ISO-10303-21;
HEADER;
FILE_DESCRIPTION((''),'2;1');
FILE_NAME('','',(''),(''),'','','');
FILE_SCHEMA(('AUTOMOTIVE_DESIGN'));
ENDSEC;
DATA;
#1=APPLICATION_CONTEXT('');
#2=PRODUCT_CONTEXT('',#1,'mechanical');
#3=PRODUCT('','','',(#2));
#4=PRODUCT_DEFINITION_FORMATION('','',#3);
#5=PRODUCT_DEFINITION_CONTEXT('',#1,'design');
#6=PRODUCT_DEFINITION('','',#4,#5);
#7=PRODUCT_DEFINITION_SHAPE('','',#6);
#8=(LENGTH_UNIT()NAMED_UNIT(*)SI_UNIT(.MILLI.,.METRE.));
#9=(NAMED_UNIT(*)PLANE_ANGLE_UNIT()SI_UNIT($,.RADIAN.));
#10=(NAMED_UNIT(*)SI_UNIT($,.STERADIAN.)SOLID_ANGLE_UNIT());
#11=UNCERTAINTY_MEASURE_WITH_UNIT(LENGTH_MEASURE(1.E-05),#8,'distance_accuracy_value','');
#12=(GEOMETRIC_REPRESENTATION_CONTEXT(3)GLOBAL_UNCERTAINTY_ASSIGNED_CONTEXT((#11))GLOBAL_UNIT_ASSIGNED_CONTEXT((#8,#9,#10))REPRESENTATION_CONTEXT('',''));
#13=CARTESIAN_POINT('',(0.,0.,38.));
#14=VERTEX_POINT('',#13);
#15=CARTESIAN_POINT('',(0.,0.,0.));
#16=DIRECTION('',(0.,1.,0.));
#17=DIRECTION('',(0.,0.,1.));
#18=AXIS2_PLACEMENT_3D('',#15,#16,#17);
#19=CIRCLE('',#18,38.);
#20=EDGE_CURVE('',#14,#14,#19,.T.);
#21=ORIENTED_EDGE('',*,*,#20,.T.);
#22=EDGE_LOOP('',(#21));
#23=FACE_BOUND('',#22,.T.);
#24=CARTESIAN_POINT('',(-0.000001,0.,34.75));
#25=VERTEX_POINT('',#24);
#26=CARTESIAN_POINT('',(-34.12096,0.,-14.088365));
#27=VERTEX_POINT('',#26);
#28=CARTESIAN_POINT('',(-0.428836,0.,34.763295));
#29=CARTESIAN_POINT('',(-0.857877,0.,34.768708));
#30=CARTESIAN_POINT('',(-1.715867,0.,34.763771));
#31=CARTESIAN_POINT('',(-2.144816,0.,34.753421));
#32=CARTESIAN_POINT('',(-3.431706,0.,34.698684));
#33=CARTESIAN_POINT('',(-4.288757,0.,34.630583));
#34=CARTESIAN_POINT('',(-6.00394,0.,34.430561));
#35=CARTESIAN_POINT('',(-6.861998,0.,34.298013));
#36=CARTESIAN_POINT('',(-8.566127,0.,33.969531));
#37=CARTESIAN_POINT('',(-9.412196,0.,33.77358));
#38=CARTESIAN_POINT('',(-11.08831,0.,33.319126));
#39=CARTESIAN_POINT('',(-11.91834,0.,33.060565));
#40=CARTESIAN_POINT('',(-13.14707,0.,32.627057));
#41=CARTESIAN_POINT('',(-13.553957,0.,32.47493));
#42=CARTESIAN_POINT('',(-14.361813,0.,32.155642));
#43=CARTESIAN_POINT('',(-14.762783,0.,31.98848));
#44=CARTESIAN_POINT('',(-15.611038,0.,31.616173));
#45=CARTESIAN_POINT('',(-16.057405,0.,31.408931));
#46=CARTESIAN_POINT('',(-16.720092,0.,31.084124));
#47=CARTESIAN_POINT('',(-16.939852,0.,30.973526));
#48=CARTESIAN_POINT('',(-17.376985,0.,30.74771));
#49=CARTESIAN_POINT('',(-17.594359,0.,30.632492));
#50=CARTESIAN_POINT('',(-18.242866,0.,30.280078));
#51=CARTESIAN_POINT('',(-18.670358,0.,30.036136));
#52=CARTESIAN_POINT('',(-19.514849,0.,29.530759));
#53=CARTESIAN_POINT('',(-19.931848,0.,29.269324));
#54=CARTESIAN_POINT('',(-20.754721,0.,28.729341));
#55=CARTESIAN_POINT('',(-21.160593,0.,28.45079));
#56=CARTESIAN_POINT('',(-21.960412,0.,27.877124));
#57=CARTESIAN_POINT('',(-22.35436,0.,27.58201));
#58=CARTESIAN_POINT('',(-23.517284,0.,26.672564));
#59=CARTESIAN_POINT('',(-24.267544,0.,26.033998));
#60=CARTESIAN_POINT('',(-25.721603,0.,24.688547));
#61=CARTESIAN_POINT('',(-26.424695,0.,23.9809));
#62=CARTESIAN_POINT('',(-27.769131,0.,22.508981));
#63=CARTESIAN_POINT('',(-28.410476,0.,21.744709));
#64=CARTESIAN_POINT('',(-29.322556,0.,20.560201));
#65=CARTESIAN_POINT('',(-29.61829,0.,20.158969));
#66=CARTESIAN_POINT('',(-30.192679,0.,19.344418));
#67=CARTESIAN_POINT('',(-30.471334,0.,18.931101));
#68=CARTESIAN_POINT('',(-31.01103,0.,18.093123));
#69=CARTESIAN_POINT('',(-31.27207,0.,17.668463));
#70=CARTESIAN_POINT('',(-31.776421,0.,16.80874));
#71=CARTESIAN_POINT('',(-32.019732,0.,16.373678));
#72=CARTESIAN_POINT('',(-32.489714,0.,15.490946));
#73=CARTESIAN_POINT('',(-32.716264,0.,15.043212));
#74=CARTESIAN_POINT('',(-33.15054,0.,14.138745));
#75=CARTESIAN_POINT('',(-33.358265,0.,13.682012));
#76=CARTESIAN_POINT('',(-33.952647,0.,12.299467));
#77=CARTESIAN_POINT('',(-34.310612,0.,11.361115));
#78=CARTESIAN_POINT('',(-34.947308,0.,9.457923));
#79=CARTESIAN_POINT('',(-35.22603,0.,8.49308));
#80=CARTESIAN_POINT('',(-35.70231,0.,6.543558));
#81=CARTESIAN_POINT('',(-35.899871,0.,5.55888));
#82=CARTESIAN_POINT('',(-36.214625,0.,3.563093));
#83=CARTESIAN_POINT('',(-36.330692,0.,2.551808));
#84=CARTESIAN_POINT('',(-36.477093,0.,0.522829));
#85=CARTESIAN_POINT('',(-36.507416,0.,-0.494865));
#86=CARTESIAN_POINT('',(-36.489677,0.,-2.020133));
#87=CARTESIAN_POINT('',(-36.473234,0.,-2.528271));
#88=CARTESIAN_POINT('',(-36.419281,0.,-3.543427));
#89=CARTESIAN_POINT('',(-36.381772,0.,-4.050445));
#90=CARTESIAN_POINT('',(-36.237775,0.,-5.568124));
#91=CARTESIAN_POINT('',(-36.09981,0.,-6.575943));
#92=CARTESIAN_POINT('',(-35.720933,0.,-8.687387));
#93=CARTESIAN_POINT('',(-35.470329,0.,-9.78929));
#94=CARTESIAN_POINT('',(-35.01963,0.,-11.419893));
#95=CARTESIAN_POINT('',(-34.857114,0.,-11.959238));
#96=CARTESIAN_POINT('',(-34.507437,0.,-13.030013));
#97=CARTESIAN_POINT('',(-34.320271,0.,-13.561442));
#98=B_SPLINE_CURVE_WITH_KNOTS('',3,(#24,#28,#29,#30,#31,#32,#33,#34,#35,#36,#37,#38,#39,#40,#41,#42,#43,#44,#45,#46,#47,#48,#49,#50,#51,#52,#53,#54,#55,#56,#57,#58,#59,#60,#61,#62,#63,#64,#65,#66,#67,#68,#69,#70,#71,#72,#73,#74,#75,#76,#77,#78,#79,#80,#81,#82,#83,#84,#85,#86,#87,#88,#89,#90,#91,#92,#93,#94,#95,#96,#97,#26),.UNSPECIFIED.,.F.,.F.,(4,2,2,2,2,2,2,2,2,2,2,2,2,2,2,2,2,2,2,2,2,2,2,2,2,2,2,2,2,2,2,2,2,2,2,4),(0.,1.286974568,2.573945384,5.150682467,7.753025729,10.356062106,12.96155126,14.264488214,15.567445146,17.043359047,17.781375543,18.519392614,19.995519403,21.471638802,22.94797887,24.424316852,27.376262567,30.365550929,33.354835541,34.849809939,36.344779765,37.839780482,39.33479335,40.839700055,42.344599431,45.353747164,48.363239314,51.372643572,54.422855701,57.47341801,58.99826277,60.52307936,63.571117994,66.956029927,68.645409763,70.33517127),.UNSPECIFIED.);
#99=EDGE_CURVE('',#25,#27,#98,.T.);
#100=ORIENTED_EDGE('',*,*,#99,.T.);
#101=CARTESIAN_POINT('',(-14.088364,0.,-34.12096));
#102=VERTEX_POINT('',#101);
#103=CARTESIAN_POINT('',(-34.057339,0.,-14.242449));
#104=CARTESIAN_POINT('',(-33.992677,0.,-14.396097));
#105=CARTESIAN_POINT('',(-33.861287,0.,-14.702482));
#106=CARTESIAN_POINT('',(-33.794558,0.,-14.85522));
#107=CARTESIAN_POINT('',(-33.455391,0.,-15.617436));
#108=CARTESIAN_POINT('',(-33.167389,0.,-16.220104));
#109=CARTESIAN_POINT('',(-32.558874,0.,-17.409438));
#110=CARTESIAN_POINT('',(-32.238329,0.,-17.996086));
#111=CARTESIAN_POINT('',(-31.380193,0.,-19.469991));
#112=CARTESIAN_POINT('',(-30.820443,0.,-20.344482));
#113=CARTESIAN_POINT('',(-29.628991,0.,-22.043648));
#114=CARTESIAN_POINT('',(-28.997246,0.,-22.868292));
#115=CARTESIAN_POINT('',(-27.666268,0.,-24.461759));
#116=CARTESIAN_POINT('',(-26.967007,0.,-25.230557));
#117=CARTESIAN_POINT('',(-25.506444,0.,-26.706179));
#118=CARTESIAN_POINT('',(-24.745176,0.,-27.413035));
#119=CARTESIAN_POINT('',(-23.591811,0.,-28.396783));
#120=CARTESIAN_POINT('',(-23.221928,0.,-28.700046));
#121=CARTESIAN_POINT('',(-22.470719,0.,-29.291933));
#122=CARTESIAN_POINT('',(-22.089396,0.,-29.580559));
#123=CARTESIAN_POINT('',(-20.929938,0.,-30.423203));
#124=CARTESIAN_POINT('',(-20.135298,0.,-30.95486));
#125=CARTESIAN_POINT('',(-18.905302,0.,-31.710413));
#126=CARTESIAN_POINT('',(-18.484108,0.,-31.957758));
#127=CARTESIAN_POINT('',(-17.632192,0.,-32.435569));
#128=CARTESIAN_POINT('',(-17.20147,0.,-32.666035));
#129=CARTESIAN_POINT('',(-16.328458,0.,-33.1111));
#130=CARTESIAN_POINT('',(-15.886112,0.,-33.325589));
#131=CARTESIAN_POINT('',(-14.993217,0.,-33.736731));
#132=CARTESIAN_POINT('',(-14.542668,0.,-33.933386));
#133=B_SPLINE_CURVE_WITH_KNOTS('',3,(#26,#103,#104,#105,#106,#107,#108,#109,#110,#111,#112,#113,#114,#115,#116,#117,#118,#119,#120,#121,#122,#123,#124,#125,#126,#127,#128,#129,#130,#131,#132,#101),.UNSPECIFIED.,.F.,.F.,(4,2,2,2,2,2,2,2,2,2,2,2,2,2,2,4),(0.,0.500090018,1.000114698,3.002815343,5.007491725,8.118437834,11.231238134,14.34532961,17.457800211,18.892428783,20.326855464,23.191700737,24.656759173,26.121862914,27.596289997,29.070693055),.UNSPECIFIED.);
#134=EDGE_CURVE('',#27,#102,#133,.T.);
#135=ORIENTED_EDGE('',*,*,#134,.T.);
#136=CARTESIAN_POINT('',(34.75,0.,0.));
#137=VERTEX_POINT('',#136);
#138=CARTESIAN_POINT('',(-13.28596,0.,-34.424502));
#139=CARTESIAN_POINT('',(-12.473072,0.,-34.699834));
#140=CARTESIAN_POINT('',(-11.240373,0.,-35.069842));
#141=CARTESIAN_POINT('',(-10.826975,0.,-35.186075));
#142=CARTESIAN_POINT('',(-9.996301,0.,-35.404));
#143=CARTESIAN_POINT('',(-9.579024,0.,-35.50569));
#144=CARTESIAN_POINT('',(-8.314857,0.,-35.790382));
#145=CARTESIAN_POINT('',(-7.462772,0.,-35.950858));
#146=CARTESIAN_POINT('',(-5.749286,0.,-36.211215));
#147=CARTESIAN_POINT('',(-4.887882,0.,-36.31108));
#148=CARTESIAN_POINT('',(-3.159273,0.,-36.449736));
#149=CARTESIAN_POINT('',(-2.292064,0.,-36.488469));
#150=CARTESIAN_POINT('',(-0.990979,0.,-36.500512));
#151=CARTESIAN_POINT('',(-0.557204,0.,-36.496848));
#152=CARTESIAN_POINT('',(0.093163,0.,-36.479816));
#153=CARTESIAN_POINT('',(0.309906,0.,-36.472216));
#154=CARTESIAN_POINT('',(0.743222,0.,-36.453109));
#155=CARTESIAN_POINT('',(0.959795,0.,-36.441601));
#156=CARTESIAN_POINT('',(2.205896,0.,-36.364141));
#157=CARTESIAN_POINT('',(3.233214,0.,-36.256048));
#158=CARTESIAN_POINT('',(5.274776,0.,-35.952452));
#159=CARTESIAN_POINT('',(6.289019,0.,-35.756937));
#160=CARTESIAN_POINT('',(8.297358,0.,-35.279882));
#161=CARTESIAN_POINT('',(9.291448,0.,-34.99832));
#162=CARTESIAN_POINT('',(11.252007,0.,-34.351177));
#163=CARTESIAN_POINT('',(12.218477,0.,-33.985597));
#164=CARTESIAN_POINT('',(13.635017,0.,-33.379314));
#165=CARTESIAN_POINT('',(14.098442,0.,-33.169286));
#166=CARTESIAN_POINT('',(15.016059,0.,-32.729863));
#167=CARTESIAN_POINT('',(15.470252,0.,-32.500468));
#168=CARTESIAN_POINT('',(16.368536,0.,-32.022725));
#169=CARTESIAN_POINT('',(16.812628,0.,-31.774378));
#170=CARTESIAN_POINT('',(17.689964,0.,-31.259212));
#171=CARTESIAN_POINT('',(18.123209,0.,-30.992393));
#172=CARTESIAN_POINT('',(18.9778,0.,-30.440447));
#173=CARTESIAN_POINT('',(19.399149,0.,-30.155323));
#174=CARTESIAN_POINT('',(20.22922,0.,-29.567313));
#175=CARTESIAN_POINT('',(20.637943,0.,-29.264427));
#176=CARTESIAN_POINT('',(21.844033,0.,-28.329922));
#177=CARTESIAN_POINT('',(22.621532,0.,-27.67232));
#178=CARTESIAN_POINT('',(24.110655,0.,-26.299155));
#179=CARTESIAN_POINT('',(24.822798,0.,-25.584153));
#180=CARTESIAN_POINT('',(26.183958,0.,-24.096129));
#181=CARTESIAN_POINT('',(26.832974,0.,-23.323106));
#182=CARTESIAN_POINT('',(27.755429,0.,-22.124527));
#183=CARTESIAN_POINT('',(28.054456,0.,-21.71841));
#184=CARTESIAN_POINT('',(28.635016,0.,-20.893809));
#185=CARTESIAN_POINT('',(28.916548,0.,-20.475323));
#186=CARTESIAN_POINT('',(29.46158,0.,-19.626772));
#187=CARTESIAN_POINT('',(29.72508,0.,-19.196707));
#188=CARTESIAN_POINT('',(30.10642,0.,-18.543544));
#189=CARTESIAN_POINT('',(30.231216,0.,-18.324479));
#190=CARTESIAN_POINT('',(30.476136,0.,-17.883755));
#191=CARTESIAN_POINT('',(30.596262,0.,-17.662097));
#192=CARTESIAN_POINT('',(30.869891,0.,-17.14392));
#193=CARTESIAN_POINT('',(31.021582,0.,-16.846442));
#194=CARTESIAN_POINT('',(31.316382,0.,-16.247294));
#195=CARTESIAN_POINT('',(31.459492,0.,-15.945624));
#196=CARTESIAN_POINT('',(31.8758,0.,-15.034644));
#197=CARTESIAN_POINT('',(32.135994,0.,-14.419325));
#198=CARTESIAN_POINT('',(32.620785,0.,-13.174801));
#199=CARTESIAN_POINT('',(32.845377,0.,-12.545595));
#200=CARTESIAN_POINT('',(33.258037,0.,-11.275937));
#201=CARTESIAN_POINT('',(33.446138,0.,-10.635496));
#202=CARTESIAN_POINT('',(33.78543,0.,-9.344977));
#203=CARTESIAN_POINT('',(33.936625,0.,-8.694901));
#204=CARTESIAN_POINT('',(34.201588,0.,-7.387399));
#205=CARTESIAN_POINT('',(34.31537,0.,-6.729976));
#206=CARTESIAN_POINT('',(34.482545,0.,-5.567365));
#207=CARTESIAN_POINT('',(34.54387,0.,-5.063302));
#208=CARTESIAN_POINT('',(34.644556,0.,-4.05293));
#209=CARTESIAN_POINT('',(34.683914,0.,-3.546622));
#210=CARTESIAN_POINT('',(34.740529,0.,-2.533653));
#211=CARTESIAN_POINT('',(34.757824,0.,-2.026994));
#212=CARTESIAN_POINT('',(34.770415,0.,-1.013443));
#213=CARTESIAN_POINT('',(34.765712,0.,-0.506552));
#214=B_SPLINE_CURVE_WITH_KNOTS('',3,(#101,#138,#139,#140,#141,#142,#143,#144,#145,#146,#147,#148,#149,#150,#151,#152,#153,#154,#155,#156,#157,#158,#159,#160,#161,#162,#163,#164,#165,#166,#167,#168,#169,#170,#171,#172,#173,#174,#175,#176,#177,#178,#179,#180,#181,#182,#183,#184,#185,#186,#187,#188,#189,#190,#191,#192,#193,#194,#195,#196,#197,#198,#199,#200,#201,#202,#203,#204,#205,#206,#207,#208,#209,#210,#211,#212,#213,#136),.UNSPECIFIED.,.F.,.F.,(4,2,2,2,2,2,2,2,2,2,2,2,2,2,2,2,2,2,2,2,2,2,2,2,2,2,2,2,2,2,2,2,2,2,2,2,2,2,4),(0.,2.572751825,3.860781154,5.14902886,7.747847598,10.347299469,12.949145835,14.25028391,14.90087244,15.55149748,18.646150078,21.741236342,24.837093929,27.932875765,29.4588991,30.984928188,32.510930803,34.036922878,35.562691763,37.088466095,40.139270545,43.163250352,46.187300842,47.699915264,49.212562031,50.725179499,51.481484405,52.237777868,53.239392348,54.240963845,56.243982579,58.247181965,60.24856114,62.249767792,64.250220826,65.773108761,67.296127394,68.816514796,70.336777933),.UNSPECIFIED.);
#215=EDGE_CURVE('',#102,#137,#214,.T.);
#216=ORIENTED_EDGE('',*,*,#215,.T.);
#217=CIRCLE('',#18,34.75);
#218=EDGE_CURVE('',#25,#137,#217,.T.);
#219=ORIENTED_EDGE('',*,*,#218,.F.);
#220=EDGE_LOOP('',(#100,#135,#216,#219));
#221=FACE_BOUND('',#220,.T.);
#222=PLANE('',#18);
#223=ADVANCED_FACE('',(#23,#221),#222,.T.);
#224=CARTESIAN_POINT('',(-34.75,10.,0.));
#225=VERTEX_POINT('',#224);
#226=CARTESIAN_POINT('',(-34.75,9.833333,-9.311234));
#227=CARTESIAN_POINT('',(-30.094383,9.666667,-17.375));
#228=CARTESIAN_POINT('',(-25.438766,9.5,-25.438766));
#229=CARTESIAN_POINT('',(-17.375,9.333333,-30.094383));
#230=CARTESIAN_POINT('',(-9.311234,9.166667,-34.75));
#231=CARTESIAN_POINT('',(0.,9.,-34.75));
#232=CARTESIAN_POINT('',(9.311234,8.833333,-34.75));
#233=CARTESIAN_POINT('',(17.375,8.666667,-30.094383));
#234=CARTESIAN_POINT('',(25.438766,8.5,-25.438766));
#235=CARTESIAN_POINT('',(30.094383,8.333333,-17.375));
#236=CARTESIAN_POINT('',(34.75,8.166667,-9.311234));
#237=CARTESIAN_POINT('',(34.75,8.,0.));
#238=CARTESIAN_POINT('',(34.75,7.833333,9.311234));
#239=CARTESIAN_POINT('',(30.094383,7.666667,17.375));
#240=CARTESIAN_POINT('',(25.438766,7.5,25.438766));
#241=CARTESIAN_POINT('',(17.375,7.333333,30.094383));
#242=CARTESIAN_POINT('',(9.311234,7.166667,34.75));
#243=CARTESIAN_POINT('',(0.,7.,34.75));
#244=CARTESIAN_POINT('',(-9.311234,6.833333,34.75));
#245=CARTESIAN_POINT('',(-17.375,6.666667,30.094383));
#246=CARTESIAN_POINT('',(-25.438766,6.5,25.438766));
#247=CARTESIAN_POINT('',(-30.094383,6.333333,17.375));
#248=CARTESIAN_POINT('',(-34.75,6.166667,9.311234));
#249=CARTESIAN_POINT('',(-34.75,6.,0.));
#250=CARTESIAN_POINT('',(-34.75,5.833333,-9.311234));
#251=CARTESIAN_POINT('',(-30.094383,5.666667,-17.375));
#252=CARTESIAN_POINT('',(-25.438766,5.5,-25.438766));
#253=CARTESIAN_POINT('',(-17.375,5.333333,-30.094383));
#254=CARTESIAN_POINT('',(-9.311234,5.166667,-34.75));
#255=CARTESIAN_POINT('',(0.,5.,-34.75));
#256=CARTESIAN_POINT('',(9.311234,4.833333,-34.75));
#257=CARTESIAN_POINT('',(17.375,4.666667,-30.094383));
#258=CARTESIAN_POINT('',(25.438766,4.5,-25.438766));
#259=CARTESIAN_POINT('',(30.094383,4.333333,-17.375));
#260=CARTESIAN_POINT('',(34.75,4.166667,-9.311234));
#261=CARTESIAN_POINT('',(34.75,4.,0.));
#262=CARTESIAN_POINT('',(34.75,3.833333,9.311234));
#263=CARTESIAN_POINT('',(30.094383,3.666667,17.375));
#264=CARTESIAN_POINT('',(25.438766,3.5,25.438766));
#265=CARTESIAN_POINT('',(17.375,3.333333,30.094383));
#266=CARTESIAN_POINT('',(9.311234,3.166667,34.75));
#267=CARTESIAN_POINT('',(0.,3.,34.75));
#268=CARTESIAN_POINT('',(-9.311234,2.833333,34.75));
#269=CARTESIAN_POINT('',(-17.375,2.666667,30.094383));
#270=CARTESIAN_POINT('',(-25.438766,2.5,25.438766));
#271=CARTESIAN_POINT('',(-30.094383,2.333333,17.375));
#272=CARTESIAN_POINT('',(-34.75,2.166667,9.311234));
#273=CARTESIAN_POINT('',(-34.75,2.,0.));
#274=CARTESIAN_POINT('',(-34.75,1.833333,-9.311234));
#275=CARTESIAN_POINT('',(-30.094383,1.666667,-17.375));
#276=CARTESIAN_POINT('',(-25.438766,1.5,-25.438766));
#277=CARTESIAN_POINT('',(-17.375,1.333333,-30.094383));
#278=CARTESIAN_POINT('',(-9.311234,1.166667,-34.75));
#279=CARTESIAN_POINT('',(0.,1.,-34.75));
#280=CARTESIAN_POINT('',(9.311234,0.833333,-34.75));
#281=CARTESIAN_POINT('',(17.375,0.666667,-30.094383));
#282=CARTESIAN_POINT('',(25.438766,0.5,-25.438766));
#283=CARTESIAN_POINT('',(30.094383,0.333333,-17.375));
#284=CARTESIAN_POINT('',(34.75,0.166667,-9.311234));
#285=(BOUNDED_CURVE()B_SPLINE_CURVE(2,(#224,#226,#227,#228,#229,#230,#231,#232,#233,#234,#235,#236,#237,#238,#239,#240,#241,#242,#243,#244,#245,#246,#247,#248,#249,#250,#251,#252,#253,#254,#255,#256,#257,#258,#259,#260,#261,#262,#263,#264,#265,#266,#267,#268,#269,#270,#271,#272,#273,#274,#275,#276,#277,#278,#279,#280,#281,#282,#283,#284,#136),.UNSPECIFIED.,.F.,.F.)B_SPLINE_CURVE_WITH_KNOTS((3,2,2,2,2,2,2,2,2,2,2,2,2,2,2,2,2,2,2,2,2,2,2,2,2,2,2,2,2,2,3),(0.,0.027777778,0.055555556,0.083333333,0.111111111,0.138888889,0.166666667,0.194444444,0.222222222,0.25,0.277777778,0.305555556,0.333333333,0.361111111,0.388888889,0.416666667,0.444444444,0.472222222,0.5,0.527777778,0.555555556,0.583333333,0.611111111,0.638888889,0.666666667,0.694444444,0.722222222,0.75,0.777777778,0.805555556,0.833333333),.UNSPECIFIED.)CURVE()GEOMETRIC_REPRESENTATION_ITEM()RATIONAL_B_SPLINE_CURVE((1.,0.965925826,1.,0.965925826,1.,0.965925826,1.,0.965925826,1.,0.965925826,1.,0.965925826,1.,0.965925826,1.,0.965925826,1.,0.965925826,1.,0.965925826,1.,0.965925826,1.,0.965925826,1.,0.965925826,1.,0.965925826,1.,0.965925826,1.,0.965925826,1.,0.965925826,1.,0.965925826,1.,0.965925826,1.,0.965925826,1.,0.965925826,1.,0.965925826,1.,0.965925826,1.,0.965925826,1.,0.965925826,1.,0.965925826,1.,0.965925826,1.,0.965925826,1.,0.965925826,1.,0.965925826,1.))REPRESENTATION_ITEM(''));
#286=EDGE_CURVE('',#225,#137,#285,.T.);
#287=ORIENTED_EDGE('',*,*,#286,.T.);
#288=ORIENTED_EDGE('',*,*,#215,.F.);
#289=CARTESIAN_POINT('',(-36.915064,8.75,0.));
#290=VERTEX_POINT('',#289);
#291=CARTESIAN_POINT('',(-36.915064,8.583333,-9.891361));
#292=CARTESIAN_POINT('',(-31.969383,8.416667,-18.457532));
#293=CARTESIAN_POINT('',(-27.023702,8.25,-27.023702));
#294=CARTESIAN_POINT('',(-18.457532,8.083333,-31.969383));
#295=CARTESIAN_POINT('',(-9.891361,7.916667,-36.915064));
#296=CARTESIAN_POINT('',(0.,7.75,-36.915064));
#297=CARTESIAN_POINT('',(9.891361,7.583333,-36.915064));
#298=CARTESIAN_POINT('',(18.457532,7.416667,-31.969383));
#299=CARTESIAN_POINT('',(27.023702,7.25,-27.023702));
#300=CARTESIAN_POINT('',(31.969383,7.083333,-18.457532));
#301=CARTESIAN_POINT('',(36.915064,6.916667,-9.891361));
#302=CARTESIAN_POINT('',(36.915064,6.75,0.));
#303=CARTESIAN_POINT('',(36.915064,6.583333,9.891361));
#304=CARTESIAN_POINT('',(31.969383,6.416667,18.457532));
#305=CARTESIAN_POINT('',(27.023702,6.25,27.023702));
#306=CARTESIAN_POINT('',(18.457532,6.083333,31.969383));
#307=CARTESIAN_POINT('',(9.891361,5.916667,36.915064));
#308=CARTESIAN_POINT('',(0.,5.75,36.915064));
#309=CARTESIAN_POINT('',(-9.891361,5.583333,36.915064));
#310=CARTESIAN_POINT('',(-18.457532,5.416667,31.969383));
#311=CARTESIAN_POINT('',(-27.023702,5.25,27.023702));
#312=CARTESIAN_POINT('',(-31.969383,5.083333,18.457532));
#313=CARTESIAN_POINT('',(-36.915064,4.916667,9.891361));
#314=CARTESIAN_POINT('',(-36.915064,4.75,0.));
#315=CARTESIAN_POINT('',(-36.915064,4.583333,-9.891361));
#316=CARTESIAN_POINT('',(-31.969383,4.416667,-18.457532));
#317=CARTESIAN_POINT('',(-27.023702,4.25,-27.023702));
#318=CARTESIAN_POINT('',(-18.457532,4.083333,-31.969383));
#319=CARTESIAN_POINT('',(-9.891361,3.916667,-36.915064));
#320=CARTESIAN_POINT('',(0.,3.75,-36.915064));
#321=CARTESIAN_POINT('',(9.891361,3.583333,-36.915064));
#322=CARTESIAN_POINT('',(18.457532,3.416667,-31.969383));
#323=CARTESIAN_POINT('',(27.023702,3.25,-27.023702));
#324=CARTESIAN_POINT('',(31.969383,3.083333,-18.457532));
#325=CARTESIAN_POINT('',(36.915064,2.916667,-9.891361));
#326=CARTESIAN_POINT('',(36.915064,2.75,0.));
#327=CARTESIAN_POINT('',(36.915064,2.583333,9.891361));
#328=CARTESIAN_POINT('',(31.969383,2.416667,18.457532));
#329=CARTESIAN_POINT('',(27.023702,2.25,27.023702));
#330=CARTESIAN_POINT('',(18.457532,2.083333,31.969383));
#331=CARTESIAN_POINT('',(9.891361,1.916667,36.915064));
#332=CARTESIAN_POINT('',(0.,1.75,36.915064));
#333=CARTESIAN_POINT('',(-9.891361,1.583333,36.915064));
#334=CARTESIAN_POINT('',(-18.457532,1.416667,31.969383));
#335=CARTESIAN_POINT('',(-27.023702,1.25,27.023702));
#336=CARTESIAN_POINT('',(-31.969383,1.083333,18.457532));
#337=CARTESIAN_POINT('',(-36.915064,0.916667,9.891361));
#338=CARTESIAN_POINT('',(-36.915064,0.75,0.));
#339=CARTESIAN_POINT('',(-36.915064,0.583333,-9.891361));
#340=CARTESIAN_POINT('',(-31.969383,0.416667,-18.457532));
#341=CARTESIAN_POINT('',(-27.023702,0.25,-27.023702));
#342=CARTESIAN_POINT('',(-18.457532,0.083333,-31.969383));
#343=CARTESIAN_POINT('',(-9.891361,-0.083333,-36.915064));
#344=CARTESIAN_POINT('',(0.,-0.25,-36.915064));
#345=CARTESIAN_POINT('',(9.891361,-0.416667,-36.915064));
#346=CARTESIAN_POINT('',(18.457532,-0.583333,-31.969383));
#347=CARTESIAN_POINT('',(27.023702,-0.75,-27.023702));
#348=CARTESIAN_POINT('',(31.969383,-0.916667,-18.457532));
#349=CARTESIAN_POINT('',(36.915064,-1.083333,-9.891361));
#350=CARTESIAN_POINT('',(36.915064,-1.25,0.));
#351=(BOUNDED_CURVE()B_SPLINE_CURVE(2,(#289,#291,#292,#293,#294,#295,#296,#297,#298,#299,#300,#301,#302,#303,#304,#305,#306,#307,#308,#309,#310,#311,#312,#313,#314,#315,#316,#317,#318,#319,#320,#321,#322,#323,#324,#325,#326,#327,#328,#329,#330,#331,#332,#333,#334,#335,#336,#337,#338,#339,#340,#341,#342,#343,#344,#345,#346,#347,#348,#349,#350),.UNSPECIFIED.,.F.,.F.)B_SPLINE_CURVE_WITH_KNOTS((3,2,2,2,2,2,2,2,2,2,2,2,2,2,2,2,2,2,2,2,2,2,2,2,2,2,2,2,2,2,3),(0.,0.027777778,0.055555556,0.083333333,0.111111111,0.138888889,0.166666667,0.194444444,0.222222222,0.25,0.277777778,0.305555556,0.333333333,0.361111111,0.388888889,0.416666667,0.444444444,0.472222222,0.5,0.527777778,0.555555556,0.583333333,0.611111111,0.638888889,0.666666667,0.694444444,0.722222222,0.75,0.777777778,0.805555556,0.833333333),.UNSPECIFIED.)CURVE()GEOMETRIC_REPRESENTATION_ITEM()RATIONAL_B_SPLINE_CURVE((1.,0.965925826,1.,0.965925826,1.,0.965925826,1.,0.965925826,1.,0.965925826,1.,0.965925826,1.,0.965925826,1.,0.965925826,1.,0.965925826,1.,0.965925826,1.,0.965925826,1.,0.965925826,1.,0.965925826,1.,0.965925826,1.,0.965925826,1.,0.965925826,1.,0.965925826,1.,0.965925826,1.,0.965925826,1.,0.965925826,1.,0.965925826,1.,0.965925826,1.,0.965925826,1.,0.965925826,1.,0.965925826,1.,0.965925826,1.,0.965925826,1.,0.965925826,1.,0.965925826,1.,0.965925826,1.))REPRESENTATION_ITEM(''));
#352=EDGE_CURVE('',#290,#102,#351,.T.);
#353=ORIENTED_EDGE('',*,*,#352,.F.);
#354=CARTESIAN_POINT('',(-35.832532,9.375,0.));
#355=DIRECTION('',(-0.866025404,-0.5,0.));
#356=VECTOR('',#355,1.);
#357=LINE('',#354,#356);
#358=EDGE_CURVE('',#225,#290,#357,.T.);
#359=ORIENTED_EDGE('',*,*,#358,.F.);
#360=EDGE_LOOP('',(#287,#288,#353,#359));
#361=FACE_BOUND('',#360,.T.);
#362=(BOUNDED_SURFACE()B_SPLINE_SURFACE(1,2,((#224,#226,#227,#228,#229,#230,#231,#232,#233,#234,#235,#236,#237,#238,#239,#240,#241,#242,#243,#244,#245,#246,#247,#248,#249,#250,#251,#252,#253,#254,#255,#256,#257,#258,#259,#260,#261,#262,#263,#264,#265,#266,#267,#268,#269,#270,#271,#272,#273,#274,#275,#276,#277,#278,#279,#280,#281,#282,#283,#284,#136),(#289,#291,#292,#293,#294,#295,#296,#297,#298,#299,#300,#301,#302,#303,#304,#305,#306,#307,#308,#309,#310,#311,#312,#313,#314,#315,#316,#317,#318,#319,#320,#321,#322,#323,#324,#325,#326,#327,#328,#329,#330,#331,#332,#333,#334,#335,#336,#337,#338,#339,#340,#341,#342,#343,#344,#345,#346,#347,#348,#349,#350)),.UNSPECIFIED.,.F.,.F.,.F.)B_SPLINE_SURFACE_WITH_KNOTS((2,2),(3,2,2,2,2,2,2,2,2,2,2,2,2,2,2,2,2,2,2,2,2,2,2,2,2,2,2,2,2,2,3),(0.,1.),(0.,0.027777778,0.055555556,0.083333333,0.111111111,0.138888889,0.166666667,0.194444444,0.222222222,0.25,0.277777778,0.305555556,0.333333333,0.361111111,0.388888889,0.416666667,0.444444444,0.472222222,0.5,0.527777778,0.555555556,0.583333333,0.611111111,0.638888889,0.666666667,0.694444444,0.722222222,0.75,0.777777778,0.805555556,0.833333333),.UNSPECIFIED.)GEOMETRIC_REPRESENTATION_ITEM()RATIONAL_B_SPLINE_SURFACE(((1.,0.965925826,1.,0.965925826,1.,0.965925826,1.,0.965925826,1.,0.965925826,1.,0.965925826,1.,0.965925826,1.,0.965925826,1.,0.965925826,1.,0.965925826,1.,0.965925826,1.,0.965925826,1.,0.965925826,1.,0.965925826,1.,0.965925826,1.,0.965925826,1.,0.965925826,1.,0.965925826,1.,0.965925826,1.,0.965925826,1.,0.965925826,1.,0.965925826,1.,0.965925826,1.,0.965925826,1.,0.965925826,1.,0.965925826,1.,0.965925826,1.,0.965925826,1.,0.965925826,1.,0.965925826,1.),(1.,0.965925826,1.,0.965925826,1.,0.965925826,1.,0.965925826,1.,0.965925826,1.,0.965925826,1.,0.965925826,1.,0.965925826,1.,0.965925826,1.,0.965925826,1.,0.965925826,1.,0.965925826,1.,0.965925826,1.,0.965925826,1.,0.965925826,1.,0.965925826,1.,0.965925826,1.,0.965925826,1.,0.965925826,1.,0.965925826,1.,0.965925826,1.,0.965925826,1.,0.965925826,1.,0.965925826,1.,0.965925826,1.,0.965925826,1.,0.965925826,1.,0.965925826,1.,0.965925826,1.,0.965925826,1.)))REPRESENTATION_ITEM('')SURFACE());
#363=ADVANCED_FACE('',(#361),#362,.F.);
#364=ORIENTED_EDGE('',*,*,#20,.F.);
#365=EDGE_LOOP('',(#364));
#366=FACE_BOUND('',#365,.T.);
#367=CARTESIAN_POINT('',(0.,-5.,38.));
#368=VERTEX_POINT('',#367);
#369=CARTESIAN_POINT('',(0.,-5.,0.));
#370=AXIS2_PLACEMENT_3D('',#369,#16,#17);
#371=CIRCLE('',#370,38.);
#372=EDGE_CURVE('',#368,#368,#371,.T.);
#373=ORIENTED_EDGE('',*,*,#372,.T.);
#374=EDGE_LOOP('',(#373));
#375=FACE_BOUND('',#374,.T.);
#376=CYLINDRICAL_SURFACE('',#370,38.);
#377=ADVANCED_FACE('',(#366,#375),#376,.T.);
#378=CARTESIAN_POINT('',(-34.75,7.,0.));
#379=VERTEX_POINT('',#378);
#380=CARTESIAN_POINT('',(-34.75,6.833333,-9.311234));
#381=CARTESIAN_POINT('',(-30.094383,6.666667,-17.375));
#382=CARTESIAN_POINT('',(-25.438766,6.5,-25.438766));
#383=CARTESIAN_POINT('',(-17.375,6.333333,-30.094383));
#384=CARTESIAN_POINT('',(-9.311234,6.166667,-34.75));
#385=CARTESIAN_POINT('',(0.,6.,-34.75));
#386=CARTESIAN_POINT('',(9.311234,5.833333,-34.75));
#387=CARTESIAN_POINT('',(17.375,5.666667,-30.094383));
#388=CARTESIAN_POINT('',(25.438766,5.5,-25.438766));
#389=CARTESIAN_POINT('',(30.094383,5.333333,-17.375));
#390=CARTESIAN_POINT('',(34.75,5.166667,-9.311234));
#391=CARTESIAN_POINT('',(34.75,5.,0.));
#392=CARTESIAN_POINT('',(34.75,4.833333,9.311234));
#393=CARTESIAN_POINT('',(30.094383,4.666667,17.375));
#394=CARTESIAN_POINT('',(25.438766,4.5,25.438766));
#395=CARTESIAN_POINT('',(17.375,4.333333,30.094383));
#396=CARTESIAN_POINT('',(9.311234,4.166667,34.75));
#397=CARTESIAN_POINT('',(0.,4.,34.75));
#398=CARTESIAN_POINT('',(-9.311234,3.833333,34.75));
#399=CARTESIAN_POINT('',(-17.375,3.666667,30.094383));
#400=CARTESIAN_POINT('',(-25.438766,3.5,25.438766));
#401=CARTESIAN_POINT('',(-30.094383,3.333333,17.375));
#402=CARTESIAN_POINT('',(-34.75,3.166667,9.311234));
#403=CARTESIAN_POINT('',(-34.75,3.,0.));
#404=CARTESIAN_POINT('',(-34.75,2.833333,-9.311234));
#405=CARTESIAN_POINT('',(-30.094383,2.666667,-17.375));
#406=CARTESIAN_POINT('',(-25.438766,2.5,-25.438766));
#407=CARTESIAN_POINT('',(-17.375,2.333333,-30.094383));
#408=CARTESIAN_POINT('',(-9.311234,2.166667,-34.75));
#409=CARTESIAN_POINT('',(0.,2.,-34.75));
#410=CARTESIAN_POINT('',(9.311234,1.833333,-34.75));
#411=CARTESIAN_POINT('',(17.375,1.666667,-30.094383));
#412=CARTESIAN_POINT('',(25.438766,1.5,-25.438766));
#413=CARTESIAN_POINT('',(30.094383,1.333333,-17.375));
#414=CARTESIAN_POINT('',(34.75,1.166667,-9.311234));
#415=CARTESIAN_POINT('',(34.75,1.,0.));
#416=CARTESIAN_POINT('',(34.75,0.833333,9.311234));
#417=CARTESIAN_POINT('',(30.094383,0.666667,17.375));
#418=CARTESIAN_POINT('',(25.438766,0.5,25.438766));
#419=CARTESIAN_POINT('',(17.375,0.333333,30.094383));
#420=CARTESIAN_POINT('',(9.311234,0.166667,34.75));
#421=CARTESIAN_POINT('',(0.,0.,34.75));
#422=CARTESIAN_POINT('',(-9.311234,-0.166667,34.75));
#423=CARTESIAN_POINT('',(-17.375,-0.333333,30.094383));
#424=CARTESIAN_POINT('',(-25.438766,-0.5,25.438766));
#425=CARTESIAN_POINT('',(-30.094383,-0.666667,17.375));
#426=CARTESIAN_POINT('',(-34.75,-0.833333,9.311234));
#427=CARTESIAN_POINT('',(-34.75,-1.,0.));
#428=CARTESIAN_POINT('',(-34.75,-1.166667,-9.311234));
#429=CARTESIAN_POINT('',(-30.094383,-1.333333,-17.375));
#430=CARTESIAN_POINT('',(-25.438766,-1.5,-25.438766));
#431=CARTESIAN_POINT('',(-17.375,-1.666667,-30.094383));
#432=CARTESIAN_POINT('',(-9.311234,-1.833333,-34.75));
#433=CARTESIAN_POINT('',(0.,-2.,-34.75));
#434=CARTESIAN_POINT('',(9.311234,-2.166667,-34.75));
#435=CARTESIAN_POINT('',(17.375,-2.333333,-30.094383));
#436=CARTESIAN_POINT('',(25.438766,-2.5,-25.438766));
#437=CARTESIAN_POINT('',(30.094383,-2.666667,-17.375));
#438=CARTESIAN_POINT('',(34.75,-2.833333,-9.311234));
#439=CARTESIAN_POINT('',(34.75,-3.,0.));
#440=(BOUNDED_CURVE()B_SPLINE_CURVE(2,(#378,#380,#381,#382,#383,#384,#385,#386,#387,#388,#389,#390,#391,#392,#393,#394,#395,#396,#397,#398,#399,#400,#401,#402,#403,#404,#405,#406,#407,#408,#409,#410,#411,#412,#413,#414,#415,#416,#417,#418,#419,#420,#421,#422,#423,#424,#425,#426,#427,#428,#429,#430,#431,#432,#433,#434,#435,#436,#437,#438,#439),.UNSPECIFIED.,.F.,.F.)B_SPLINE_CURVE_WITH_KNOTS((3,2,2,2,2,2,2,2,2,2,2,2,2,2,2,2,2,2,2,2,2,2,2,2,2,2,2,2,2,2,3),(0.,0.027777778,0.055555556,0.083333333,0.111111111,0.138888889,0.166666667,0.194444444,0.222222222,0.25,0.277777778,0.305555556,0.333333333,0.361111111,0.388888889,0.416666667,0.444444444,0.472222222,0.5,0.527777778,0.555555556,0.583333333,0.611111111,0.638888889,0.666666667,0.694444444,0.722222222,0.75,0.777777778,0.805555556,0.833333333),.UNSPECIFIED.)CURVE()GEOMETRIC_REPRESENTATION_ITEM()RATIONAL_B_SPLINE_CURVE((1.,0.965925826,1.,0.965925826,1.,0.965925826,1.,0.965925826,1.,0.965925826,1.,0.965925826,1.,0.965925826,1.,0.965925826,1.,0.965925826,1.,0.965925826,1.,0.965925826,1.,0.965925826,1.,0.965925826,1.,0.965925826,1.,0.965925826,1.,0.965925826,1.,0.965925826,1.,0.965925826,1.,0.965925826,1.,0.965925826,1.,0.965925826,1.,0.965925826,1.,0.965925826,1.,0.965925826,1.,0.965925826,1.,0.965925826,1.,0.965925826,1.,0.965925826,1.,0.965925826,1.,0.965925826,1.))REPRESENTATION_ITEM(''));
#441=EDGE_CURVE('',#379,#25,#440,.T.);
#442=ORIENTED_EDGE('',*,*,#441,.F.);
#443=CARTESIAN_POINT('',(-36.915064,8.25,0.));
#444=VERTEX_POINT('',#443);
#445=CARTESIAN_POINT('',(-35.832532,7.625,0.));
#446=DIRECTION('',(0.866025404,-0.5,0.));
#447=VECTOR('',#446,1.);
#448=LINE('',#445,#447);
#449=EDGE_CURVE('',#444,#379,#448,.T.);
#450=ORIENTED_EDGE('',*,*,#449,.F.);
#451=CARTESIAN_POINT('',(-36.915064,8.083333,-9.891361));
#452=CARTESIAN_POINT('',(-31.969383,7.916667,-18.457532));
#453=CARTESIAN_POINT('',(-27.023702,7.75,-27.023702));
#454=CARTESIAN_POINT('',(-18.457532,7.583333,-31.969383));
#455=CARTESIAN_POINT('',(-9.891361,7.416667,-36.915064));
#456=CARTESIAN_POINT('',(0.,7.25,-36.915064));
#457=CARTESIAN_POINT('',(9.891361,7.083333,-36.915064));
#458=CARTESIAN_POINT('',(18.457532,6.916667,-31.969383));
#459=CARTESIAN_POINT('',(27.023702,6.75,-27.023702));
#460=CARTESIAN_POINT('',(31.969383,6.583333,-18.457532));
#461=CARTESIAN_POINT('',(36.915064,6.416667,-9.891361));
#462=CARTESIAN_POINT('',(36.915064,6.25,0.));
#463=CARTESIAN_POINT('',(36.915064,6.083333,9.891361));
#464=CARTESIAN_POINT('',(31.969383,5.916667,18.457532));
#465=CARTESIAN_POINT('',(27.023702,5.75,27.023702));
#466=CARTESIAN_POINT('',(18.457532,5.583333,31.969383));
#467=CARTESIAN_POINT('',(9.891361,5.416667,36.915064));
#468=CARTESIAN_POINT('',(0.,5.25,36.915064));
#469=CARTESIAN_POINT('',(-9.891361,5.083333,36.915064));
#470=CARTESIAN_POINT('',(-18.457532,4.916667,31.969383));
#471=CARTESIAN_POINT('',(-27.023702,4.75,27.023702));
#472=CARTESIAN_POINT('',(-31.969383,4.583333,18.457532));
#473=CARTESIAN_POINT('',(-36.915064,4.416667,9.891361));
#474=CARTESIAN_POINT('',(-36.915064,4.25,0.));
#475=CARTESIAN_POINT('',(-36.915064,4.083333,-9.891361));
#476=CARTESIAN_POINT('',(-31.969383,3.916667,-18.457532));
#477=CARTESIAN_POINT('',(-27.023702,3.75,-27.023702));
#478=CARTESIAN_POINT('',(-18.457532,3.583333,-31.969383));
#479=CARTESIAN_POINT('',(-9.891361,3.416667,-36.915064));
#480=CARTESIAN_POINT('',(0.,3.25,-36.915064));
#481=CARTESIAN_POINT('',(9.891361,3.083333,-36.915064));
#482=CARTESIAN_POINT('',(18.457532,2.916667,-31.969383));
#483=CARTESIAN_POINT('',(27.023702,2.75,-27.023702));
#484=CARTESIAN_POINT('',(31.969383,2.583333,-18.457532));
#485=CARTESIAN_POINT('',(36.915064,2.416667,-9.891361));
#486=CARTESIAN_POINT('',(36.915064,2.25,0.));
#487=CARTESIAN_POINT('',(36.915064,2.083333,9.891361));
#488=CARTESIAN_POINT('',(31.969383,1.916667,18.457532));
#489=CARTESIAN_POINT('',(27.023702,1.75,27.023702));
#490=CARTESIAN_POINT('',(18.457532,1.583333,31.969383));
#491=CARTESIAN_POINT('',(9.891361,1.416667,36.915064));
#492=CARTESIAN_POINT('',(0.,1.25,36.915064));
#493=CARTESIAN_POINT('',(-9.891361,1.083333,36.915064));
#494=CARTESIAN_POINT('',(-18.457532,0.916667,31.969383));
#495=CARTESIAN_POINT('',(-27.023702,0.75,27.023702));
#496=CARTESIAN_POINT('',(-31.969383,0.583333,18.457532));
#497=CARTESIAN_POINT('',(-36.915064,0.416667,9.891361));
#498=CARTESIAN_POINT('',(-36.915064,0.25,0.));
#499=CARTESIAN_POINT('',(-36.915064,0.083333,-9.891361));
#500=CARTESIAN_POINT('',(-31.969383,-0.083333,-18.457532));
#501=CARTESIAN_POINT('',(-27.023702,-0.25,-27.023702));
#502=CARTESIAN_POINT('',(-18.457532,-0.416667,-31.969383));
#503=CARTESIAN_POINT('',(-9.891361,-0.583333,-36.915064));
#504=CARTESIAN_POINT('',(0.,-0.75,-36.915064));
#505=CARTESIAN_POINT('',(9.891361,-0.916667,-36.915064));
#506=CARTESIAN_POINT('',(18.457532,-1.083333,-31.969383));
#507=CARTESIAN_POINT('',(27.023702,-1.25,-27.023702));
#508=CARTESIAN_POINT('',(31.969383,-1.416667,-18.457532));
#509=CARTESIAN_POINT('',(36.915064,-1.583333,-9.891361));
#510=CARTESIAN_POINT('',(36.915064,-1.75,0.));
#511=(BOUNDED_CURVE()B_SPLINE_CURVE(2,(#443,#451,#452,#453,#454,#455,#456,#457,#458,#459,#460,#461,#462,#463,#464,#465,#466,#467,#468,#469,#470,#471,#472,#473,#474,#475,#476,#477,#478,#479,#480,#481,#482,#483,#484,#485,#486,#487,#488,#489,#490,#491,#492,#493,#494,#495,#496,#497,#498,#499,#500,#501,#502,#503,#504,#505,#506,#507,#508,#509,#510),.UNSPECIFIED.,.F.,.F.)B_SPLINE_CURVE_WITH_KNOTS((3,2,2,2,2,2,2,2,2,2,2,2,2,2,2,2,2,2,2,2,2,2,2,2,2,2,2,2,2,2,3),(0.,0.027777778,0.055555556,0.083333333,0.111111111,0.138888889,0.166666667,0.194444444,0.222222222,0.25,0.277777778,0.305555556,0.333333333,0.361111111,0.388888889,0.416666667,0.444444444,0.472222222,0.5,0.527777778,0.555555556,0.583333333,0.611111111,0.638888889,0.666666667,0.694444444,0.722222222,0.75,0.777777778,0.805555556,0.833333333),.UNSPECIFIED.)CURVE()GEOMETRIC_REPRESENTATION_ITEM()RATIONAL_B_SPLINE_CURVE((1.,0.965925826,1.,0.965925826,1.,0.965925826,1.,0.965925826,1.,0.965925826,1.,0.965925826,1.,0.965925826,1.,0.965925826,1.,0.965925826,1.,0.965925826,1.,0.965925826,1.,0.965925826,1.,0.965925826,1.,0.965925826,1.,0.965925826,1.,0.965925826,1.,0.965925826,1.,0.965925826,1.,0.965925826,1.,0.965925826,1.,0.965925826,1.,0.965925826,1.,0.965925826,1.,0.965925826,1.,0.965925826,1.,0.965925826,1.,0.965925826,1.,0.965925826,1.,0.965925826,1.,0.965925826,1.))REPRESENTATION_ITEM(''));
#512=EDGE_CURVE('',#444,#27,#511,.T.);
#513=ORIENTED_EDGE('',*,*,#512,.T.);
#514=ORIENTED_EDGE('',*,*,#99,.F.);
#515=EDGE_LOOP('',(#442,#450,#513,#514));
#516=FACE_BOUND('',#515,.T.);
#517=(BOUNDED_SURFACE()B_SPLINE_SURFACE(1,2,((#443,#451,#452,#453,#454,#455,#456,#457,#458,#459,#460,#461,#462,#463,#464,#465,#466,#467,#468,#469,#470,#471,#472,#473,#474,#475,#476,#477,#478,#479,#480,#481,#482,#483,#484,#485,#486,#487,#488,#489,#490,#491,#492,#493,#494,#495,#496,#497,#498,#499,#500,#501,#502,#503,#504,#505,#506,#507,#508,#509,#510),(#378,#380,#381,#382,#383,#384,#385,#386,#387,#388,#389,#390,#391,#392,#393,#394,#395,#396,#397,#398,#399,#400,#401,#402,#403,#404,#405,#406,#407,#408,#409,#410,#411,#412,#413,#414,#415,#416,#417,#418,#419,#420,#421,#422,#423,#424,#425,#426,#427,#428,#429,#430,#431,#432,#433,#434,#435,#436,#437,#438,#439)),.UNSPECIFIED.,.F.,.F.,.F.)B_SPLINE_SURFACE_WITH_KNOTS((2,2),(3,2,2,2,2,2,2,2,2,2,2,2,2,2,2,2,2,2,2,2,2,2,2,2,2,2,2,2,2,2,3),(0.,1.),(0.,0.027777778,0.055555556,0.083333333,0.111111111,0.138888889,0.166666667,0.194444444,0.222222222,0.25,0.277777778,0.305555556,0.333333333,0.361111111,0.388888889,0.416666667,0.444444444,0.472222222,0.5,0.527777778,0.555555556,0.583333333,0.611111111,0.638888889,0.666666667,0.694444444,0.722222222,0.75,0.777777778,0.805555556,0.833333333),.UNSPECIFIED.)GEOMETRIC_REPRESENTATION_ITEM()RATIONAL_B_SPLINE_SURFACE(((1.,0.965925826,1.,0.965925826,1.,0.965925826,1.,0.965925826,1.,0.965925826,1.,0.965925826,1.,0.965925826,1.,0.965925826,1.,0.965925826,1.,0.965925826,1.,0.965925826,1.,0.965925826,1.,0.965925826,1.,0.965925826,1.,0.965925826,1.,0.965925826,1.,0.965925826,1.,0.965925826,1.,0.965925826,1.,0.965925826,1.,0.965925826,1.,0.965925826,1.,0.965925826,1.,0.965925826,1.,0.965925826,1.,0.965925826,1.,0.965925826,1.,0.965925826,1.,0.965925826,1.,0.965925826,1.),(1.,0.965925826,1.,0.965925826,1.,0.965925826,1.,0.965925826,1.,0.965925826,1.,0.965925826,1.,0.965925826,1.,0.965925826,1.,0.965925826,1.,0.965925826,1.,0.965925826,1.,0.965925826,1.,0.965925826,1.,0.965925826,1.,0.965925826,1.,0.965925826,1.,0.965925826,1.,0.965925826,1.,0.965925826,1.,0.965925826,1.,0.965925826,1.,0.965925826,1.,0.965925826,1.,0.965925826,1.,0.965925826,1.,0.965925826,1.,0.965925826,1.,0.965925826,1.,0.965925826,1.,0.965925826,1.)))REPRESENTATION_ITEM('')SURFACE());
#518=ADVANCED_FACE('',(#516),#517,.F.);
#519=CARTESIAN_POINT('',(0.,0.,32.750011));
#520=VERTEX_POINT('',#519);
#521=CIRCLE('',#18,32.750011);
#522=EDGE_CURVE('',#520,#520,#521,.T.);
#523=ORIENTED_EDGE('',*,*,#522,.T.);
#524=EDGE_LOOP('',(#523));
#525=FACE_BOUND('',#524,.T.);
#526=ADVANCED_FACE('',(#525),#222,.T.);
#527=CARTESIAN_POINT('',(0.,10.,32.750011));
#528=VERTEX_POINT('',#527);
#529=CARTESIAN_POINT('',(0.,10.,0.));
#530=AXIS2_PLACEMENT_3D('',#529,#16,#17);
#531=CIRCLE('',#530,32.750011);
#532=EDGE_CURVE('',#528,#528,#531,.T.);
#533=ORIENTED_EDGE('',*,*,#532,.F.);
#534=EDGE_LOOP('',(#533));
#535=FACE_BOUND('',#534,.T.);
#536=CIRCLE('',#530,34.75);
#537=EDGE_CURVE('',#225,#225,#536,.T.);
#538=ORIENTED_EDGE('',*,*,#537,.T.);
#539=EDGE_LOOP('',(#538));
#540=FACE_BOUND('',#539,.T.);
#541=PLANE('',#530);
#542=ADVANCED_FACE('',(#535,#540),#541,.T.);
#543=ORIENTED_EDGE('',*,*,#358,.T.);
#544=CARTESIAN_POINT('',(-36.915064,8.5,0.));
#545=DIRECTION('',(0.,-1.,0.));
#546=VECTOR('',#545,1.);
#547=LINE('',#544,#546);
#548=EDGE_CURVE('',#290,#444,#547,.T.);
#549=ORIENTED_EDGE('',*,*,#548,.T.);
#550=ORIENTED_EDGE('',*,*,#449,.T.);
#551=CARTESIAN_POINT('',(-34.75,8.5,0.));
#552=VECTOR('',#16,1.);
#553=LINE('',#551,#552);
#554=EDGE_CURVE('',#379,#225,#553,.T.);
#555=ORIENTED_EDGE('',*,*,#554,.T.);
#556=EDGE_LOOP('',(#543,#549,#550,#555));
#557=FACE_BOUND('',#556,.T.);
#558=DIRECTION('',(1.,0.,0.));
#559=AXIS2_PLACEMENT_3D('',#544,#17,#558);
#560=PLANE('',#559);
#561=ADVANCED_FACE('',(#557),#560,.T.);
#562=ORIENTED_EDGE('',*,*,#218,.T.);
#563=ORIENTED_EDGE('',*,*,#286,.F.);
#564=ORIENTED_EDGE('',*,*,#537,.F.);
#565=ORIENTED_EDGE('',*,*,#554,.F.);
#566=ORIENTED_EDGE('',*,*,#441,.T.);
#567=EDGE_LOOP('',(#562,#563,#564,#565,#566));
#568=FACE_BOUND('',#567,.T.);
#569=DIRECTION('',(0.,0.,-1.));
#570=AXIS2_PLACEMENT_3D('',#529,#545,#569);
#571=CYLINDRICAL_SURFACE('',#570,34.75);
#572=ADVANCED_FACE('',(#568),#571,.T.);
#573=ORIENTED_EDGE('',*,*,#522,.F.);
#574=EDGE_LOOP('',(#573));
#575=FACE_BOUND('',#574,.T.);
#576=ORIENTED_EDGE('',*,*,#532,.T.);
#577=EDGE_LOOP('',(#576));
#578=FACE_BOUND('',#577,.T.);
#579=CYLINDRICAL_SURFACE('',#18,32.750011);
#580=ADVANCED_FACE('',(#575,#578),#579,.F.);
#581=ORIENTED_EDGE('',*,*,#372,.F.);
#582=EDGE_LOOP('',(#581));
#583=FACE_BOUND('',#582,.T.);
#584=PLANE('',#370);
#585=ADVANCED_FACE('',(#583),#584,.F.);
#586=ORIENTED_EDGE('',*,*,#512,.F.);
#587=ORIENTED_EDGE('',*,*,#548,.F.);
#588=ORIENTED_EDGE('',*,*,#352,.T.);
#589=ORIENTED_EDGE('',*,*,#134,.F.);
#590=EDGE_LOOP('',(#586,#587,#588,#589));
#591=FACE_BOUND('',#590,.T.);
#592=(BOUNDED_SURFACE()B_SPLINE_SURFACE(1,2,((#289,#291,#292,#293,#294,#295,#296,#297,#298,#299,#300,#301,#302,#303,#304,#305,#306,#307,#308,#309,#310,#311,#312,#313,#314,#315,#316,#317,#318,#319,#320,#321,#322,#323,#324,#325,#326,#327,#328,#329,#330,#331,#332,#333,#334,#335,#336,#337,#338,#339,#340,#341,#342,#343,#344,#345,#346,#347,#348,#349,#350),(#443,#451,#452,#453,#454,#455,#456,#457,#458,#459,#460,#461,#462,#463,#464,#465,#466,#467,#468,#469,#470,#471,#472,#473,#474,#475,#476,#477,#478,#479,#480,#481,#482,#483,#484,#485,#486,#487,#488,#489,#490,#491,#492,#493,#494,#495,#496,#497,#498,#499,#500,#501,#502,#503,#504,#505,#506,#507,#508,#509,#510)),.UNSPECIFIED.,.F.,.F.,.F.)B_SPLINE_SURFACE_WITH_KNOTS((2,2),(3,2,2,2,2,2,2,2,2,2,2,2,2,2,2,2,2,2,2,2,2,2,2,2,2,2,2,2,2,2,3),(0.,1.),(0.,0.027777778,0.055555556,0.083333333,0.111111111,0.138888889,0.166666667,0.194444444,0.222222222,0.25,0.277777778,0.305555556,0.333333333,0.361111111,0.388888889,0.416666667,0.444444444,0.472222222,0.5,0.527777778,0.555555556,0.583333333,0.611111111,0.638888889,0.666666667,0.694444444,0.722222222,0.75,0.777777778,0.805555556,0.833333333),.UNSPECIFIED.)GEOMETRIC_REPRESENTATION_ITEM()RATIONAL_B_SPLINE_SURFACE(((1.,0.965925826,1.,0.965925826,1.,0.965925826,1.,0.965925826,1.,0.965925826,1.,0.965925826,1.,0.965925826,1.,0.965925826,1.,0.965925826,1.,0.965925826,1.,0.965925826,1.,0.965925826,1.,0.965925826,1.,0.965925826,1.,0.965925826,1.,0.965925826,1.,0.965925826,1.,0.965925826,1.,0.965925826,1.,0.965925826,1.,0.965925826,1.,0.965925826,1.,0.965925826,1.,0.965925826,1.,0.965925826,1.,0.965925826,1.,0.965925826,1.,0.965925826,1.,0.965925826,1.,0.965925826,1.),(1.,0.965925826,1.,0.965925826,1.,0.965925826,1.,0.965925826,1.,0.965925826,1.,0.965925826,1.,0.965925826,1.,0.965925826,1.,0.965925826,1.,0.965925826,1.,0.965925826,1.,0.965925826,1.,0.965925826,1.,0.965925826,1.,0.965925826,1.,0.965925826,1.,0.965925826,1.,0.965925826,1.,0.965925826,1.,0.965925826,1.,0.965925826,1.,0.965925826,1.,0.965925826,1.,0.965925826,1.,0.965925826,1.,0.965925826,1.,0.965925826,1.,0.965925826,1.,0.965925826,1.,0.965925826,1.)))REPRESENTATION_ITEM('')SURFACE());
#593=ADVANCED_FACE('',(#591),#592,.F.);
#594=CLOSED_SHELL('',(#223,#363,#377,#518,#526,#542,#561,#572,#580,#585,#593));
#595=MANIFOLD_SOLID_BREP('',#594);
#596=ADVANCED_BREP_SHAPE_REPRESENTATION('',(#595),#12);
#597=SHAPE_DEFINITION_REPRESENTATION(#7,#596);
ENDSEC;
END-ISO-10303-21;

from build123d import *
from build123d.topology import SkipClean

# Parameters (mm, degrees)
SKETCH1_R           = 38
BOSS_EXTRUDE1_DEPTH = 5
SKETCH1_4_R         = 34.75
BOSS_EXTRUDE2_DEPTH = 10
THREAD1_PITCH       = 4
SKETCH6_R           = 32.750011187
CUT_EXTRUDE1_DEPTH  = 10


with BuildPart() as part:
    # Sketch1 → Boss-Extrude1 (new body)
    with BuildSketch(Plane(origin=(0, 0, 0), x_dir=(1, 0, 0), z_dir=(0, 1, 0))):
        with Locations(Location((0, 0, 0), (0, 0, 270))):
            Circle(SKETCH1_R)
    extrude(amount=-BOSS_EXTRUDE1_DEPTH)

    # Sketch1<4> → Boss-Extrude2 (add)
    with BuildSketch(Plane(origin=(0, 0, 0), x_dir=(1, 0, 0), z_dir=(0, 1, 0))):
        with Locations(Location((0, 0, 0), (0, 0, 270))):
            Circle(SKETCH1_4_R)
    extrude(amount=BOSS_EXTRUDE2_DEPTH)

    # Thread1: the profile of Thread Profile1 profile screwed along a right-hand helix of 2.5 turns, 12 arcs to a turn; built about Z, then put on its axis
    thread1_z = Axis((0, 0, 0), (0, 0, 1))
    thread1_corners = [(34.7497, 0, -0.000173205), (36.9150635, 0, 1.249999995), (36.9150635, 0, 1.749999995), (34.7497, 0, 3.000173194)]
    with BuildLine(mode=Mode.PRIVATE) as thread1_profile:
        Line(thread1_corners[0], thread1_corners[1])
        Line(thread1_corners[1], thread1_corners[2])
        Line(thread1_corners[2], thread1_corners[3])
        Line(thread1_corners[3], thread1_corners[0])
    thread1_cap = Face(thread1_profile.wire())
    thread1_turn_angles = [0, 15, 30, 45, 60, 75, 90, 105, 120, 135, 150, 165, 180, 195, 210, 225, 240, 255, 270, 285, 300, 315, 330, 345, 360]
    thread1_turn_weights = [1, 0.9659258262890683, 1, 0.9659258262890683, 1, 0.9659258262890683, 1, 0.9659258262890683, 1, 0.9659258262890683, 1, 0.9659258262890683, 1, 0.9659258262890683, 1, 0.9659258262890683, 1, 0.9659258262890683, 1, 0.9659258262890683, 1, 0.9659258262890683, 1, 0.9659258262890683, 1]
    thread1_turn_rails = [Edge.make_bspline([Vector(p[0], p[1], 0).rotate(thread1_z, thread1_turn_angles[k]) / thread1_turn_weights[k] + Vector(0, 0, p[2] + THREAD1_PITCH * thread1_turn_angles[k] / 360) for k in range(25)], [0, 0, 0, 1, 1, 2, 2, 3, 3, 4, 4, 5, 5, 6, 6, 7, 7, 8, 8, 9, 9, 10, 10, 11, 11, 12, 12, 12], 2, thread1_turn_weights) for p in thread1_corners]
    thread1_turn_sides = [Face.make_surface_from_curves(thread1_turn_rails[p[0]], thread1_turn_rails[p[1]]) for p in [(0, 1), (1, 2), (2, 3), (3, 0)]]
    thread1_last_angles = [720, 735, 750, 765, 780, 795, 810, 825, 840, 855, 870, 885, 900]
    thread1_last_weights = [1, 0.9659258262890683, 1, 0.9659258262890683, 1, 0.9659258262890683, 1, 0.9659258262890683, 1, 0.9659258262890683, 1, 0.9659258262890683, 1]
    thread1_last_rails = [Edge.make_bspline([Vector(p[0], p[1], 0).rotate(thread1_z, thread1_last_angles[k]) / thread1_last_weights[k] + Vector(0, 0, p[2] + THREAD1_PITCH * thread1_last_angles[k] / 360) for k in range(13)], [0, 0, 0, 1, 1, 2, 2, 3, 3, 4, 4, 5, 5, 6, 6, 6], 2, thread1_last_weights) for p in thread1_corners]
    thread1_last_sides = [Face.make_surface_from_curves(thread1_last_rails[p[0]], thread1_last_rails[p[1]]) for p in [(0, 1), (1, 2), (2, 3), (3, 0)]]
    thread1 = Plane(origin=(0, 10, 0), x_dir=(-1, 0, 0), z_dir=(0, -1, 0)) * Solid(Shell([*[p.moved(Location((0, 0, THREAD1_PITCH * i))) for i in range(2) for p in thread1_turn_sides], *thread1_last_sides, thread1_cap, thread1_cap.rotate(thread1_z, 900).moved(Location((0, 0, THREAD1_PITCH * 900 / 360)))]))
    add(thread1)

    # Sketch6 → Cut-Extrude1 (cut)
    with SkipClean():  # the faces are left unmerged after this step: merging them gives an invalid solid
        with BuildSketch(Plane(origin=(0, 10, 0), x_dir=(1, 0, 0), z_dir=(0, 1, 0))):
            with Locations(Location((0, 0, 0), (0, 0, 270))):
                Circle(SKETCH6_R)
        extrude(amount=-CUT_EXTRUDE1_DEPTH, mode=Mode.SUBTRACT)


solid = part.part
